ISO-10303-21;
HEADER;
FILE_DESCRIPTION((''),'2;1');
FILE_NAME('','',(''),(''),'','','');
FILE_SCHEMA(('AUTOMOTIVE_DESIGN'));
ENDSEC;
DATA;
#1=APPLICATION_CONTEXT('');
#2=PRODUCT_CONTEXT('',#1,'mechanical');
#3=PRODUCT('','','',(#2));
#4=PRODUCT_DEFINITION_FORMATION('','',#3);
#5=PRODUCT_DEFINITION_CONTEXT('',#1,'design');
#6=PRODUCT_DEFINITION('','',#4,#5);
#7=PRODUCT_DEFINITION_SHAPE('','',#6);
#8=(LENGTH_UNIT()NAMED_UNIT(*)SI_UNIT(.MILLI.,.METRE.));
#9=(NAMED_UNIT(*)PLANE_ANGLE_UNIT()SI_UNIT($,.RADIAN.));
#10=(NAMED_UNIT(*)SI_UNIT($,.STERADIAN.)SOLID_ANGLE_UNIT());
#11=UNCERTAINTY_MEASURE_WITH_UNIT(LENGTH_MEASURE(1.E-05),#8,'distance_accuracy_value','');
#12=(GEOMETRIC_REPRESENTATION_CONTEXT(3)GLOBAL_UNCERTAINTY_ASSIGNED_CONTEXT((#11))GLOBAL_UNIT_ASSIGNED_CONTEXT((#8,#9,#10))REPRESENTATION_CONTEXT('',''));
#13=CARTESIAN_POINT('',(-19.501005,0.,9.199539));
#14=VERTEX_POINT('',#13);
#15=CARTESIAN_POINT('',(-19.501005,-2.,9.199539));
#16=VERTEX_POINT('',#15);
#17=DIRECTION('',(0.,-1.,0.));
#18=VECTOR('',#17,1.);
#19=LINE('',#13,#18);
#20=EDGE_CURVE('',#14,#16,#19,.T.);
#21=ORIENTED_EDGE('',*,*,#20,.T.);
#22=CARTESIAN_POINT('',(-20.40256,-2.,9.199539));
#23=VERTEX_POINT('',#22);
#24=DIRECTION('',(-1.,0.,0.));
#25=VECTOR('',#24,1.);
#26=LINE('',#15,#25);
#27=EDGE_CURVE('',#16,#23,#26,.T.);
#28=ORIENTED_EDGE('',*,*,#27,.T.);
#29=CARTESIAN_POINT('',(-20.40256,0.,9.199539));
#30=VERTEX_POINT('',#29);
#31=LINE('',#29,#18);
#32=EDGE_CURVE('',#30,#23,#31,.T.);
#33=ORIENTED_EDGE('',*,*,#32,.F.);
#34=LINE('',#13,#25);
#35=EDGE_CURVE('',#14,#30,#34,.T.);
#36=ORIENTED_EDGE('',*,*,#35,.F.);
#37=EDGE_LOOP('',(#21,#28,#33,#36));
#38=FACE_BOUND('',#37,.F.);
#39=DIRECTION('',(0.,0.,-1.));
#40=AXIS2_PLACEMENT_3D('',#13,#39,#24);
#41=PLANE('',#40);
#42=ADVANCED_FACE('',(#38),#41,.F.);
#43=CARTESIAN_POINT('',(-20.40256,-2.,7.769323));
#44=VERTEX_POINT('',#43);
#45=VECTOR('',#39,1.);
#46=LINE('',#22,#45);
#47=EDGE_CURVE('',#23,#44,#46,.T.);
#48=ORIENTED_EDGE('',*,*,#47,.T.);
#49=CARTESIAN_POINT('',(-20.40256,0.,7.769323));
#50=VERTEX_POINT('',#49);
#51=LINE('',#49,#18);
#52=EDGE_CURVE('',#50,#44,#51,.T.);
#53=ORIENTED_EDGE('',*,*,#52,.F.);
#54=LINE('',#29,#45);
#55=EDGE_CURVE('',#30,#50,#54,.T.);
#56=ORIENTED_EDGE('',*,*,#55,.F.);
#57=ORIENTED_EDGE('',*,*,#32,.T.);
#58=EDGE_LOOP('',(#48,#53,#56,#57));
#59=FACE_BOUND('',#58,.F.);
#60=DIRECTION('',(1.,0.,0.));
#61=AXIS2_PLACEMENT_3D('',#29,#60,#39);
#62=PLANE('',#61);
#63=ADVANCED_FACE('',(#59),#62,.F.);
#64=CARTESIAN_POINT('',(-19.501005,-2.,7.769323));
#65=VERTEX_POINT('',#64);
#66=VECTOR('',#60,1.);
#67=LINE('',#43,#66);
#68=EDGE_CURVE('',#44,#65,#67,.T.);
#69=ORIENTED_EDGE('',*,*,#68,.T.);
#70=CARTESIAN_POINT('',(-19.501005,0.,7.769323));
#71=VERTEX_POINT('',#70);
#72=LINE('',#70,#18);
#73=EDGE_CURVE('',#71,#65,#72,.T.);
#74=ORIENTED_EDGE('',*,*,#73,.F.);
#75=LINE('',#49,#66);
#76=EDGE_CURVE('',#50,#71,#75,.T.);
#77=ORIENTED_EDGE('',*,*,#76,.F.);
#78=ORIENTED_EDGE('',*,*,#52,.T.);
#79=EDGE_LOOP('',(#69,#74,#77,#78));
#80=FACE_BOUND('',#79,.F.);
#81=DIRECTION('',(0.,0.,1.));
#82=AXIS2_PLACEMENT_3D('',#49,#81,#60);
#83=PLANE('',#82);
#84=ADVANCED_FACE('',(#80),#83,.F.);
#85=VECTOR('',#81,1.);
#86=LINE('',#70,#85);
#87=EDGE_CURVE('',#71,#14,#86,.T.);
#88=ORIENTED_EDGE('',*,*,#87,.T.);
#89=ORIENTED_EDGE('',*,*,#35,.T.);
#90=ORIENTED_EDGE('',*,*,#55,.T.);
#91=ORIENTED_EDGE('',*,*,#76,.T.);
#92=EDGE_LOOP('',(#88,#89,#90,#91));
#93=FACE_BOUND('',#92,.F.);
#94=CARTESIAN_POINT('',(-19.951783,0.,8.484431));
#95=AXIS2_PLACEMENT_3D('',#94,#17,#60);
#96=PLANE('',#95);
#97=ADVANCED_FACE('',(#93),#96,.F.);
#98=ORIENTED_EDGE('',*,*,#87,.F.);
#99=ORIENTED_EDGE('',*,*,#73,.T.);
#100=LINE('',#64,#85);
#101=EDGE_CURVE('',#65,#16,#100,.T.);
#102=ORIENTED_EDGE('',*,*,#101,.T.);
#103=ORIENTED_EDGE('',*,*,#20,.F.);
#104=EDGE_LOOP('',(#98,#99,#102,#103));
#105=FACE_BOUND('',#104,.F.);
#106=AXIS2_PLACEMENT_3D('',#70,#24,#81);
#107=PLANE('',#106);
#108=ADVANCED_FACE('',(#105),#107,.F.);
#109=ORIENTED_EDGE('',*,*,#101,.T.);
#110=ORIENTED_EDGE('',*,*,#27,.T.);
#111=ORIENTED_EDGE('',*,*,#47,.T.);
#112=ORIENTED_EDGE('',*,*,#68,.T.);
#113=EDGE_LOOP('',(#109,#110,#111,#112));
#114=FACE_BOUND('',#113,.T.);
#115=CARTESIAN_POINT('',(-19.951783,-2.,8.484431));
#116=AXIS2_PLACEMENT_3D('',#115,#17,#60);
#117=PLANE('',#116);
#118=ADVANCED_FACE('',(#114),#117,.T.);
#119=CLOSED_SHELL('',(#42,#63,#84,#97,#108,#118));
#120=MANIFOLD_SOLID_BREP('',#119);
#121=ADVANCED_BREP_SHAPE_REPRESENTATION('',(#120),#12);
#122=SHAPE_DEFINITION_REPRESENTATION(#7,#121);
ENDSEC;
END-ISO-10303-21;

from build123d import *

# Parameters (mm, degrees)
F1_DEPTH = 2


# Not quite as in the source:
# - a feature names something its author has since deleted; it is built from what else it names


with BuildPart() as f1:
    # F0 (on Front) → F1 (new body)
    with BuildSketch(Plane.XZ):
        Polygon((-19.5010053796, 7.7693229541), (-19.5010053796, 8.4021232677), (-19.5010053796, 9.1995391995), (-20.4025600106, 9.1995391995), (-20.4025600106, 7.7693229541), align=None)
    extrude(amount=F1_DEPTH)


solid = f1.part
